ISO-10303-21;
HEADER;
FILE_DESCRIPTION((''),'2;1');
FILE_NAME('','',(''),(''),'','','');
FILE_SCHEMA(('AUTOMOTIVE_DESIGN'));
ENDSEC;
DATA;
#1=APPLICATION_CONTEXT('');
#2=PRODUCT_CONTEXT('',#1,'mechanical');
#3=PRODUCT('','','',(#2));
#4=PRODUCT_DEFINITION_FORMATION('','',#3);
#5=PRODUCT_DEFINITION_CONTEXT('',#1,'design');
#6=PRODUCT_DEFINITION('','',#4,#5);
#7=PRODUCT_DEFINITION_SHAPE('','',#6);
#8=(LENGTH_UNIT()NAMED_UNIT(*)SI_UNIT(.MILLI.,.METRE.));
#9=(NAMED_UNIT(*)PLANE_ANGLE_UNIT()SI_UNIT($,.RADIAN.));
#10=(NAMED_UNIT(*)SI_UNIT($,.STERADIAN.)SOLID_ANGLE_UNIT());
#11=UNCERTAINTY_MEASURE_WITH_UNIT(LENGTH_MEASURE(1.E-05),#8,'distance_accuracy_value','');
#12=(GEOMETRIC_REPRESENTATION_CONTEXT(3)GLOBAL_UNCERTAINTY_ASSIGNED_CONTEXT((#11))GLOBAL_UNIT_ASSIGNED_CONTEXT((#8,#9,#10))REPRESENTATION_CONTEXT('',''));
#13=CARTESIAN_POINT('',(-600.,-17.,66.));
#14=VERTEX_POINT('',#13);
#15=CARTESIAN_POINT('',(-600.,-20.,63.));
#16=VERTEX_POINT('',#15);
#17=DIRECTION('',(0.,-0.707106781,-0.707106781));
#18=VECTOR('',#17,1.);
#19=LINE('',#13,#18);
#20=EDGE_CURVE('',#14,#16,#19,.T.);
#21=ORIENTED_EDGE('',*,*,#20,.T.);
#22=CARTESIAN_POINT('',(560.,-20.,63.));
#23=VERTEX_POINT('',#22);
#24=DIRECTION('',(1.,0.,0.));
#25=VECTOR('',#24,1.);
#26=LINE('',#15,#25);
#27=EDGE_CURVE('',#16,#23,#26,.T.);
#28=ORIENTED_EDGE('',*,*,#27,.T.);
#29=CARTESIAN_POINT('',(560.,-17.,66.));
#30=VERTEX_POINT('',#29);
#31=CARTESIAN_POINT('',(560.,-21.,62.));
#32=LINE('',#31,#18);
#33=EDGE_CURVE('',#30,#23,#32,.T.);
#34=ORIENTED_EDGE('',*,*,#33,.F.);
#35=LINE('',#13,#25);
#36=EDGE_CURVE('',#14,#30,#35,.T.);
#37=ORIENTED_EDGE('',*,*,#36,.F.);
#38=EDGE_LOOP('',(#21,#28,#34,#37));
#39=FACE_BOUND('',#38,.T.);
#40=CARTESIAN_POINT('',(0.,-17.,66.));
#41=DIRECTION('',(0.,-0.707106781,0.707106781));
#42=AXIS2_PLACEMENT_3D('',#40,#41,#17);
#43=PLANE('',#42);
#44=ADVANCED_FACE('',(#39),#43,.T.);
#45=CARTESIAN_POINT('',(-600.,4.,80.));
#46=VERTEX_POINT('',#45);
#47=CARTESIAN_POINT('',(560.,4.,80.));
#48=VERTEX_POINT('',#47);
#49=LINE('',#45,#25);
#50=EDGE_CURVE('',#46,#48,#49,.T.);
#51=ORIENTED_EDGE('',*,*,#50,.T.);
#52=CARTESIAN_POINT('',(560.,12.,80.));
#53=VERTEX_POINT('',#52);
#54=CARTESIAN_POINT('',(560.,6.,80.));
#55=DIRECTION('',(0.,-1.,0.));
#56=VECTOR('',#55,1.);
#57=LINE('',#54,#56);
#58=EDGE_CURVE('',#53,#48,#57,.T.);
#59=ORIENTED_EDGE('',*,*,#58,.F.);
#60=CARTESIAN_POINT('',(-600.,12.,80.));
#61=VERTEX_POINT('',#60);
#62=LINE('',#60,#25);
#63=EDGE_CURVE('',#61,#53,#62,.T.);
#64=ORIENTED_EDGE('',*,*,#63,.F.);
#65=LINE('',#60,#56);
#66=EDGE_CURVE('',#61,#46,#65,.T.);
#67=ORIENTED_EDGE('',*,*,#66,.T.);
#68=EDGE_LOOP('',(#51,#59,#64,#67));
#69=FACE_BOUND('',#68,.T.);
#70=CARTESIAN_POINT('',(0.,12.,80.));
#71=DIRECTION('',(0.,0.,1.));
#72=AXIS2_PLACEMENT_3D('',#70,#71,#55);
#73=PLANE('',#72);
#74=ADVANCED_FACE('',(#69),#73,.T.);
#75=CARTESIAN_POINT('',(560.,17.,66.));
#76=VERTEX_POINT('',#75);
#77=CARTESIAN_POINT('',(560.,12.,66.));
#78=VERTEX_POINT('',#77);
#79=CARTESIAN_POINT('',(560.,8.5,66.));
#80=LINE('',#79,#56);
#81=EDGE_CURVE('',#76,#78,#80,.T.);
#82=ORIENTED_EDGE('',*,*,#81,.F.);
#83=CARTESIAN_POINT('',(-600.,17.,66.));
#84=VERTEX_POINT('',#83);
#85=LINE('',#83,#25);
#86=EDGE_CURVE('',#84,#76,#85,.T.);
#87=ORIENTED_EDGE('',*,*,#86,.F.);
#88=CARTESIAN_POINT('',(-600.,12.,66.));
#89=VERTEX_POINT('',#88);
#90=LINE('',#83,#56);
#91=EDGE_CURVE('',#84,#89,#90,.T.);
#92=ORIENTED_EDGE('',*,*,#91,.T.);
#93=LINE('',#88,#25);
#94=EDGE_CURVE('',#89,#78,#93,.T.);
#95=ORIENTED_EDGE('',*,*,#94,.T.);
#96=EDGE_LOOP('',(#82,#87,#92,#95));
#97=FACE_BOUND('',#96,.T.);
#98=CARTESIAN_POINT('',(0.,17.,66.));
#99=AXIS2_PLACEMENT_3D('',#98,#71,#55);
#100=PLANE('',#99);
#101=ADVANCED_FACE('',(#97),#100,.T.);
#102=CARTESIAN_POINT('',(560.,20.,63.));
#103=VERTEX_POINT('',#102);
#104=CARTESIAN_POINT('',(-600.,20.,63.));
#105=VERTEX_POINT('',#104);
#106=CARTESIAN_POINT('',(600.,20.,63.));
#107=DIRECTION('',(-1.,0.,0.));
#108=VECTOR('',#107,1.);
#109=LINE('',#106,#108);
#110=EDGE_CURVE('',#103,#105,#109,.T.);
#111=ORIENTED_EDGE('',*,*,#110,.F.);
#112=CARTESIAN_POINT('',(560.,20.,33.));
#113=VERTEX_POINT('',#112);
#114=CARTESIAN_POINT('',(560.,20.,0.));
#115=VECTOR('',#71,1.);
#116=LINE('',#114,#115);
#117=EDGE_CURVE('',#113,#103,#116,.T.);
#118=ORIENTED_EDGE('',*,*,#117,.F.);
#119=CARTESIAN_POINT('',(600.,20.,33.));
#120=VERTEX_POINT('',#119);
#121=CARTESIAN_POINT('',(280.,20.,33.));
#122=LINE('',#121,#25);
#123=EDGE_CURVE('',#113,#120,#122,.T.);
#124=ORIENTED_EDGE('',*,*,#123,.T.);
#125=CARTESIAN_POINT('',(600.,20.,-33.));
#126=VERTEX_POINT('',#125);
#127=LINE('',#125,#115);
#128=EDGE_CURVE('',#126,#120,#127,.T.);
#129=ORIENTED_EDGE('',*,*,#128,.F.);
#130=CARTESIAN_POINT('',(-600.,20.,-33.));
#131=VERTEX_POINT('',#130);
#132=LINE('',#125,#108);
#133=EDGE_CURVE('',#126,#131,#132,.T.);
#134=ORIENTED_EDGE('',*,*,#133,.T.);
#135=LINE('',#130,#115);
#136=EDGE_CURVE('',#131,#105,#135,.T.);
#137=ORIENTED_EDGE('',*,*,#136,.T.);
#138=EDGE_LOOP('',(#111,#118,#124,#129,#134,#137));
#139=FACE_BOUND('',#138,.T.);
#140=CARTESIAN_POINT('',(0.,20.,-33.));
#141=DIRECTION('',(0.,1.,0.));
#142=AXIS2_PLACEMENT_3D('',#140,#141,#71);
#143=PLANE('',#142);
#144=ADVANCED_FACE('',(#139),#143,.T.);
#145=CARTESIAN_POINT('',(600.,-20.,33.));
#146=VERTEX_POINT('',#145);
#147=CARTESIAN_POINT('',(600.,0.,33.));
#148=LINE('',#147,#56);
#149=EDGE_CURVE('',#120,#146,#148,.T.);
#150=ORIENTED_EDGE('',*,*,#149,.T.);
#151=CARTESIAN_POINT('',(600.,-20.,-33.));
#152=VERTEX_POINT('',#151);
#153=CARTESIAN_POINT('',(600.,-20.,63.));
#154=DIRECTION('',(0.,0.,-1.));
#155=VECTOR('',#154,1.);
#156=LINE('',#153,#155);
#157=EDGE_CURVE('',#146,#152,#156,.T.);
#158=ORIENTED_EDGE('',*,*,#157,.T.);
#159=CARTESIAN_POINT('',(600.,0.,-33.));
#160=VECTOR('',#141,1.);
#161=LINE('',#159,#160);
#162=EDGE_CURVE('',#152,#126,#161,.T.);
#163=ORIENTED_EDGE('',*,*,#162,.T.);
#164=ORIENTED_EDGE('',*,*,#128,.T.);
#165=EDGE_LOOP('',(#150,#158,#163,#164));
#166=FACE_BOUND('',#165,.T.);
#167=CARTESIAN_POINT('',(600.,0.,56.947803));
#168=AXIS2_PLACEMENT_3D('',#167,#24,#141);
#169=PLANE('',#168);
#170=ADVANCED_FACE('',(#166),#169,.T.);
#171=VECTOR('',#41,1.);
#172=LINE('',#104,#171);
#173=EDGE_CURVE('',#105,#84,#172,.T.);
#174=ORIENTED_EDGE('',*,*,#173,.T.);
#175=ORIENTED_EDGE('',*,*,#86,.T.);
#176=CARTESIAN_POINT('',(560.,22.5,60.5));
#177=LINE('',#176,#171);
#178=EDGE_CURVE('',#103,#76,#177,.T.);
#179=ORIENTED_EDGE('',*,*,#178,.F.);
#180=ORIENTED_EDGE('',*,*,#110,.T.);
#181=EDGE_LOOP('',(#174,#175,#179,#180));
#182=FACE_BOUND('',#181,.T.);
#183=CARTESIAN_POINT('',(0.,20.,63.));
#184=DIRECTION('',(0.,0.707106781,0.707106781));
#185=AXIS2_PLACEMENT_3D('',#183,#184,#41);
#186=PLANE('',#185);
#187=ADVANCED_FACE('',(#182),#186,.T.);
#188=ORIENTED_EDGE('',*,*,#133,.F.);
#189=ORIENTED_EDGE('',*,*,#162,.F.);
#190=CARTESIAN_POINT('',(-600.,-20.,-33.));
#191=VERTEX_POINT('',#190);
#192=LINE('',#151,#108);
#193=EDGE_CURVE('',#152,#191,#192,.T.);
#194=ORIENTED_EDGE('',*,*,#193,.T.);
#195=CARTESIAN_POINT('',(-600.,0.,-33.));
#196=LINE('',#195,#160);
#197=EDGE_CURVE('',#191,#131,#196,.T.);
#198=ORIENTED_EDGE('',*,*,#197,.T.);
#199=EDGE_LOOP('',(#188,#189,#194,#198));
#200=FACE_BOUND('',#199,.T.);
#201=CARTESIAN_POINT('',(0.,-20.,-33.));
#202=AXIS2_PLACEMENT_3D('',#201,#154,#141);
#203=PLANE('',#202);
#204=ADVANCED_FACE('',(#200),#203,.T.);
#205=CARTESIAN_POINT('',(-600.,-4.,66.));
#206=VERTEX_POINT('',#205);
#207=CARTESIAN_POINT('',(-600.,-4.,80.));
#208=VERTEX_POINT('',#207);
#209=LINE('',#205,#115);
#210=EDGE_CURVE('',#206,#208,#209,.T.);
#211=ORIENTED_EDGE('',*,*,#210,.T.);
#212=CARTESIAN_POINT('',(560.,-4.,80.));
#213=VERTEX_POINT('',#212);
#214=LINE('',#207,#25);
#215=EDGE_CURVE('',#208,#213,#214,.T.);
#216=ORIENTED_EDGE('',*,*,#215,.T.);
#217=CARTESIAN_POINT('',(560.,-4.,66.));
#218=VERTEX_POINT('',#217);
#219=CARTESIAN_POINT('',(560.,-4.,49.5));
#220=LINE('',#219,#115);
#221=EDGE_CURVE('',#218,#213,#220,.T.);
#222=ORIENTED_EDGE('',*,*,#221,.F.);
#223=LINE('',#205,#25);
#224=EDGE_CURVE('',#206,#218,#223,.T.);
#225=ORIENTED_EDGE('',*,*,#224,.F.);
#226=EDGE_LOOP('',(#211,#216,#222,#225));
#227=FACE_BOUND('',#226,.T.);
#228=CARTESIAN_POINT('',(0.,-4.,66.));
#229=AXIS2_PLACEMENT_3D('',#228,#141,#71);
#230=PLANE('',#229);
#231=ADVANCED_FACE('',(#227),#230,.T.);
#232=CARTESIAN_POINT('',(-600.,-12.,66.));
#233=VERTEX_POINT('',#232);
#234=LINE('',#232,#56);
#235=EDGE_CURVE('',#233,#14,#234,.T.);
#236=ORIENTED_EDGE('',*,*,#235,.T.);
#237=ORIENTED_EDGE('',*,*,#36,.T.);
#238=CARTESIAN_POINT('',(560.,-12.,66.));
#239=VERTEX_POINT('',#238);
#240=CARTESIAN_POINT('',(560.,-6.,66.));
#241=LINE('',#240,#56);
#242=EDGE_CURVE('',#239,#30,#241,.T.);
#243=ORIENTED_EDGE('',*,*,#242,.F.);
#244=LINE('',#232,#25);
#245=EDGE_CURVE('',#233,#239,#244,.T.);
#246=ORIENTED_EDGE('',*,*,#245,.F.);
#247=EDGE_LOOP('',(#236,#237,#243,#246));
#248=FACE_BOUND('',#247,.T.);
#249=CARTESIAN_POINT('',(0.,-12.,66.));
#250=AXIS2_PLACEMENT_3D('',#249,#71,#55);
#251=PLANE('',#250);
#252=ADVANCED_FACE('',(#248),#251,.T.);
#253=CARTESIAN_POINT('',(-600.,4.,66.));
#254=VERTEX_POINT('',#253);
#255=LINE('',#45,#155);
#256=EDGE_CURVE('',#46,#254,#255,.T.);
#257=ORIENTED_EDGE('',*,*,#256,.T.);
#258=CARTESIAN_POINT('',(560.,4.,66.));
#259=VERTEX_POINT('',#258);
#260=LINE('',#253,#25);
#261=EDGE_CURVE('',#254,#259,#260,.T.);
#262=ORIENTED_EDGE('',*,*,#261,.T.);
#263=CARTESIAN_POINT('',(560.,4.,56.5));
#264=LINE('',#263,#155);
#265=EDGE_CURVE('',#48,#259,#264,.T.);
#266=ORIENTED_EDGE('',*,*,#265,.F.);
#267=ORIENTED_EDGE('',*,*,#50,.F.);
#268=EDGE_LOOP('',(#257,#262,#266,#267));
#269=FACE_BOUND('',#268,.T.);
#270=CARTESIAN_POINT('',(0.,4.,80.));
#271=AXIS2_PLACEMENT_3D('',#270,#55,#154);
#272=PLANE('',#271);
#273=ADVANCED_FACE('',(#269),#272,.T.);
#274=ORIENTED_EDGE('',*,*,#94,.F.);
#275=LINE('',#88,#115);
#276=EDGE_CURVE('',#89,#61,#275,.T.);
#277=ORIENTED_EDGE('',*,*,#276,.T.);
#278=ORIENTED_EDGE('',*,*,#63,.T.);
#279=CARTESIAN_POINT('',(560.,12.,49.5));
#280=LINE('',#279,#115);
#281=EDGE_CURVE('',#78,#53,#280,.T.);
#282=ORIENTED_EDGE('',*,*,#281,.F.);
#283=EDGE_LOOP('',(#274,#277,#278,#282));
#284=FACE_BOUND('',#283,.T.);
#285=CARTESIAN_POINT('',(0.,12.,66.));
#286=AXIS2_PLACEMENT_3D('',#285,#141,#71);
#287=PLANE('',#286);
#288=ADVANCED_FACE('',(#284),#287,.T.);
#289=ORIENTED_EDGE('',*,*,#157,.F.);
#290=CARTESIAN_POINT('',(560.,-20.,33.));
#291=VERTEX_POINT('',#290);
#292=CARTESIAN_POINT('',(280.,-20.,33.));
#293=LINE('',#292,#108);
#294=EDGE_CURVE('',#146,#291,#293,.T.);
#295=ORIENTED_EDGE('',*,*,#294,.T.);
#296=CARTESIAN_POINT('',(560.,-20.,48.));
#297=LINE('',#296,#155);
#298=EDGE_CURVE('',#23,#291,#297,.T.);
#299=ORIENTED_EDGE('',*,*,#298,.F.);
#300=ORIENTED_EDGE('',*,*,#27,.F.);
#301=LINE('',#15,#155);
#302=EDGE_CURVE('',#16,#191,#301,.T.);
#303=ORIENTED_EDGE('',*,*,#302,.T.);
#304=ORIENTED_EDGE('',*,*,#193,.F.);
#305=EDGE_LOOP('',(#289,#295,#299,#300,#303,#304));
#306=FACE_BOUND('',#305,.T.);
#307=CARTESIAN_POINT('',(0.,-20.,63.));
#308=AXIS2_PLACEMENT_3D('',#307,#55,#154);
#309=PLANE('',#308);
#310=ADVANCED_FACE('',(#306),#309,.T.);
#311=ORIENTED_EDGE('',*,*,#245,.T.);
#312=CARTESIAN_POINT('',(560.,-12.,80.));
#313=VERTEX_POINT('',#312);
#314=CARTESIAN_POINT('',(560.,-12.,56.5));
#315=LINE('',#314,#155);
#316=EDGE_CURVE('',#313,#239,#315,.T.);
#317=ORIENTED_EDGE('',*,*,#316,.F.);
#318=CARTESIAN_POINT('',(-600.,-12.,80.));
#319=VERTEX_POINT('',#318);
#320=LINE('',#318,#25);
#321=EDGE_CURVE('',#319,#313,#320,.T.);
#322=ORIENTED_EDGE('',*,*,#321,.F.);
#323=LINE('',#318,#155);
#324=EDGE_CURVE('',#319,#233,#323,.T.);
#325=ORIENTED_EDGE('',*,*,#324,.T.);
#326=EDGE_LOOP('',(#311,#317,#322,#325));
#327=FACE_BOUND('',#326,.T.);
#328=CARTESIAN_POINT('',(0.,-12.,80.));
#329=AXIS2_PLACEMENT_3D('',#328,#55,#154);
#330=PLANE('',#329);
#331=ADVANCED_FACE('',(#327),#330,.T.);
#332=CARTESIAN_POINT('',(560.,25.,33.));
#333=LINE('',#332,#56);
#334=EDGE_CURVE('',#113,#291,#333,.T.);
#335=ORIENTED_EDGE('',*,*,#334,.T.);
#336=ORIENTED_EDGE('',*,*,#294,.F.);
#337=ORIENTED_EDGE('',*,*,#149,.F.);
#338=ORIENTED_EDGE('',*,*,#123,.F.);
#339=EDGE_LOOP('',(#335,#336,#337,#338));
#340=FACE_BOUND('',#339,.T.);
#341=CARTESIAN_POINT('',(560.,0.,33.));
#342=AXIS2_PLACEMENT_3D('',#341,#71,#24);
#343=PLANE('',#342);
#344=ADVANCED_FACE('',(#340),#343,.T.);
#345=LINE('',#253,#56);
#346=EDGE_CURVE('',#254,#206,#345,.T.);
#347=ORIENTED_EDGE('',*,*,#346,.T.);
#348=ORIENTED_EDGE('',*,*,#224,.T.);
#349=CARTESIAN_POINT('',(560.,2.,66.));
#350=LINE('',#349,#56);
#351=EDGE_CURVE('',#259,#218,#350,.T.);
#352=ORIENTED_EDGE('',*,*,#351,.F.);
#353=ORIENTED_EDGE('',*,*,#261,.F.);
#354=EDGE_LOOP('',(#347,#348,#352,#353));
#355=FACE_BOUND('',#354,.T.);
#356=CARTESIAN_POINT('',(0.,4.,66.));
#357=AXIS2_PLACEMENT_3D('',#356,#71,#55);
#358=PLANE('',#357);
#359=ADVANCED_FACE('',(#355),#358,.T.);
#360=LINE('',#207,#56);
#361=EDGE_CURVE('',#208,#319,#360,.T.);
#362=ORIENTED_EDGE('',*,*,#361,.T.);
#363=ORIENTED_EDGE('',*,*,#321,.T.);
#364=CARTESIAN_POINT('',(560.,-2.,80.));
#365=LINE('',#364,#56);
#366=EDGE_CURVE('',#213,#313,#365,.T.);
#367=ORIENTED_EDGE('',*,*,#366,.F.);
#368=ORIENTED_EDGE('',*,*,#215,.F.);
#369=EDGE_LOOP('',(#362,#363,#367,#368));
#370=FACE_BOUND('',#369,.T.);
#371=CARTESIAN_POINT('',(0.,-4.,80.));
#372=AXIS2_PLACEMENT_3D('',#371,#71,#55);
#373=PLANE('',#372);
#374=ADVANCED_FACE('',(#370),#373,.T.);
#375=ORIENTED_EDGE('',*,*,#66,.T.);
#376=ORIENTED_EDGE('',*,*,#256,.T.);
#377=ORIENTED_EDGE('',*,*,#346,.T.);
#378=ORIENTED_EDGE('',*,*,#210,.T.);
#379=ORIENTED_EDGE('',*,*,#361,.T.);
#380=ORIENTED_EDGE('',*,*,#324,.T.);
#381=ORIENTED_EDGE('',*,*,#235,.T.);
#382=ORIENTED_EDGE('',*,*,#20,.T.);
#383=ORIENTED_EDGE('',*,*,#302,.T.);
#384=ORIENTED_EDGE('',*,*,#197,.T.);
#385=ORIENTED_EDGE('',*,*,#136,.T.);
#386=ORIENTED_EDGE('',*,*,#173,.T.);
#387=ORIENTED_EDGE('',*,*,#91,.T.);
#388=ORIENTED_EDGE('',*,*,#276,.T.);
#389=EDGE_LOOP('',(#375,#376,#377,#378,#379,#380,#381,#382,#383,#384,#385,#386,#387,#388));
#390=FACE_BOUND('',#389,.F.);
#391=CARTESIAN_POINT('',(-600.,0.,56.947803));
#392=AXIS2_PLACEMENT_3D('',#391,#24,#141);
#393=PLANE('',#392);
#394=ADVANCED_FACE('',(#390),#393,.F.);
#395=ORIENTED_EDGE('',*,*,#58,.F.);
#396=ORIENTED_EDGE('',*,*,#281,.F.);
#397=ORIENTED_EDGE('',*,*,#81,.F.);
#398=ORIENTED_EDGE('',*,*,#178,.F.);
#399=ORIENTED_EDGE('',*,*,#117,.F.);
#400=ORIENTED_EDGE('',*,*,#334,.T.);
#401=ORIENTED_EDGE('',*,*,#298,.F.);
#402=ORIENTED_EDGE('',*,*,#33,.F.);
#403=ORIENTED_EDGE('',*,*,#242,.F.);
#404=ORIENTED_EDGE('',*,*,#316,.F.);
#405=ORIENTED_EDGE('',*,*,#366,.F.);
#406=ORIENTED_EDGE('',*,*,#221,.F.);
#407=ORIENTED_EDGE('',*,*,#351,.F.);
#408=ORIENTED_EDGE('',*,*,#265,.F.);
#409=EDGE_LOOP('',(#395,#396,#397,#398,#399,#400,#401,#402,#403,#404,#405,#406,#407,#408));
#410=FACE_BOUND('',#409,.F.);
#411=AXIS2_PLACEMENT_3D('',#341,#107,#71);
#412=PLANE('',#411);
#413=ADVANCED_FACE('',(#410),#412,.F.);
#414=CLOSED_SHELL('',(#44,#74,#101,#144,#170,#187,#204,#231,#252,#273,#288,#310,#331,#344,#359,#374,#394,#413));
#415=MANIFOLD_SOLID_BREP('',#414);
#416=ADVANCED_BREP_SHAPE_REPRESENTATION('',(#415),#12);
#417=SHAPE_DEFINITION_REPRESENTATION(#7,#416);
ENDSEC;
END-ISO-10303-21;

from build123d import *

# Parameters (mm, degrees)
F1_W     = 40
F1_H     = 33
F3_DEPTH = 600
F2_W     = 80
F2_H     = 100
F4_DEPTH = 25
F5_W     = 1200
F5_H     = 50
F6_DEPTH = 1235


# Not quite as in the source:
# - an extrude ends at something that could not be found from the text; its depth is read off the source's solid


with BuildPart() as f3:
    # F1 (on Right) → F3 (new body, symmetric)
    with BuildSketch(Plane.YZ):
        Polygon((20, 33), (20, 63), (17, 66), (12, 66), (12, 80), (4, 80), (4, 66), (-4, 66), (-4, 80), (-12, 80), (-12, 66), (-17, 66), (-20, 63), (-20, 33), align=None)
        with Locations((0, 16.5)):
            Rectangle(F1_W, F1_H)
        with Locations((0, -16.5)):
            Rectangle(F1_W, F1_H)
    extrude(amount=F3_DEPTH, both=True)

    # F2 (on Front) → F4 (cut, symmetric)
    with BuildSketch(Plane.XZ):
        with Locations((600, 83)):
            Rectangle(F2_W, F2_H)
        with Locations((600, -83)):
            Rectangle(F2_W, F2_H)
    extrude(amount=F4_DEPTH, both=True, mode=Mode.SUBTRACT)

    # F5 (on face) → F6 (cut, through all)
    with BuildSketch(Plane.XZ.offset(20)):
        with Locations((0, -58)):
            Rectangle(F5_W, F5_H)
    extrude(amount=-F6_DEPTH, mode=Mode.SUBTRACT)


solid = f3.part
